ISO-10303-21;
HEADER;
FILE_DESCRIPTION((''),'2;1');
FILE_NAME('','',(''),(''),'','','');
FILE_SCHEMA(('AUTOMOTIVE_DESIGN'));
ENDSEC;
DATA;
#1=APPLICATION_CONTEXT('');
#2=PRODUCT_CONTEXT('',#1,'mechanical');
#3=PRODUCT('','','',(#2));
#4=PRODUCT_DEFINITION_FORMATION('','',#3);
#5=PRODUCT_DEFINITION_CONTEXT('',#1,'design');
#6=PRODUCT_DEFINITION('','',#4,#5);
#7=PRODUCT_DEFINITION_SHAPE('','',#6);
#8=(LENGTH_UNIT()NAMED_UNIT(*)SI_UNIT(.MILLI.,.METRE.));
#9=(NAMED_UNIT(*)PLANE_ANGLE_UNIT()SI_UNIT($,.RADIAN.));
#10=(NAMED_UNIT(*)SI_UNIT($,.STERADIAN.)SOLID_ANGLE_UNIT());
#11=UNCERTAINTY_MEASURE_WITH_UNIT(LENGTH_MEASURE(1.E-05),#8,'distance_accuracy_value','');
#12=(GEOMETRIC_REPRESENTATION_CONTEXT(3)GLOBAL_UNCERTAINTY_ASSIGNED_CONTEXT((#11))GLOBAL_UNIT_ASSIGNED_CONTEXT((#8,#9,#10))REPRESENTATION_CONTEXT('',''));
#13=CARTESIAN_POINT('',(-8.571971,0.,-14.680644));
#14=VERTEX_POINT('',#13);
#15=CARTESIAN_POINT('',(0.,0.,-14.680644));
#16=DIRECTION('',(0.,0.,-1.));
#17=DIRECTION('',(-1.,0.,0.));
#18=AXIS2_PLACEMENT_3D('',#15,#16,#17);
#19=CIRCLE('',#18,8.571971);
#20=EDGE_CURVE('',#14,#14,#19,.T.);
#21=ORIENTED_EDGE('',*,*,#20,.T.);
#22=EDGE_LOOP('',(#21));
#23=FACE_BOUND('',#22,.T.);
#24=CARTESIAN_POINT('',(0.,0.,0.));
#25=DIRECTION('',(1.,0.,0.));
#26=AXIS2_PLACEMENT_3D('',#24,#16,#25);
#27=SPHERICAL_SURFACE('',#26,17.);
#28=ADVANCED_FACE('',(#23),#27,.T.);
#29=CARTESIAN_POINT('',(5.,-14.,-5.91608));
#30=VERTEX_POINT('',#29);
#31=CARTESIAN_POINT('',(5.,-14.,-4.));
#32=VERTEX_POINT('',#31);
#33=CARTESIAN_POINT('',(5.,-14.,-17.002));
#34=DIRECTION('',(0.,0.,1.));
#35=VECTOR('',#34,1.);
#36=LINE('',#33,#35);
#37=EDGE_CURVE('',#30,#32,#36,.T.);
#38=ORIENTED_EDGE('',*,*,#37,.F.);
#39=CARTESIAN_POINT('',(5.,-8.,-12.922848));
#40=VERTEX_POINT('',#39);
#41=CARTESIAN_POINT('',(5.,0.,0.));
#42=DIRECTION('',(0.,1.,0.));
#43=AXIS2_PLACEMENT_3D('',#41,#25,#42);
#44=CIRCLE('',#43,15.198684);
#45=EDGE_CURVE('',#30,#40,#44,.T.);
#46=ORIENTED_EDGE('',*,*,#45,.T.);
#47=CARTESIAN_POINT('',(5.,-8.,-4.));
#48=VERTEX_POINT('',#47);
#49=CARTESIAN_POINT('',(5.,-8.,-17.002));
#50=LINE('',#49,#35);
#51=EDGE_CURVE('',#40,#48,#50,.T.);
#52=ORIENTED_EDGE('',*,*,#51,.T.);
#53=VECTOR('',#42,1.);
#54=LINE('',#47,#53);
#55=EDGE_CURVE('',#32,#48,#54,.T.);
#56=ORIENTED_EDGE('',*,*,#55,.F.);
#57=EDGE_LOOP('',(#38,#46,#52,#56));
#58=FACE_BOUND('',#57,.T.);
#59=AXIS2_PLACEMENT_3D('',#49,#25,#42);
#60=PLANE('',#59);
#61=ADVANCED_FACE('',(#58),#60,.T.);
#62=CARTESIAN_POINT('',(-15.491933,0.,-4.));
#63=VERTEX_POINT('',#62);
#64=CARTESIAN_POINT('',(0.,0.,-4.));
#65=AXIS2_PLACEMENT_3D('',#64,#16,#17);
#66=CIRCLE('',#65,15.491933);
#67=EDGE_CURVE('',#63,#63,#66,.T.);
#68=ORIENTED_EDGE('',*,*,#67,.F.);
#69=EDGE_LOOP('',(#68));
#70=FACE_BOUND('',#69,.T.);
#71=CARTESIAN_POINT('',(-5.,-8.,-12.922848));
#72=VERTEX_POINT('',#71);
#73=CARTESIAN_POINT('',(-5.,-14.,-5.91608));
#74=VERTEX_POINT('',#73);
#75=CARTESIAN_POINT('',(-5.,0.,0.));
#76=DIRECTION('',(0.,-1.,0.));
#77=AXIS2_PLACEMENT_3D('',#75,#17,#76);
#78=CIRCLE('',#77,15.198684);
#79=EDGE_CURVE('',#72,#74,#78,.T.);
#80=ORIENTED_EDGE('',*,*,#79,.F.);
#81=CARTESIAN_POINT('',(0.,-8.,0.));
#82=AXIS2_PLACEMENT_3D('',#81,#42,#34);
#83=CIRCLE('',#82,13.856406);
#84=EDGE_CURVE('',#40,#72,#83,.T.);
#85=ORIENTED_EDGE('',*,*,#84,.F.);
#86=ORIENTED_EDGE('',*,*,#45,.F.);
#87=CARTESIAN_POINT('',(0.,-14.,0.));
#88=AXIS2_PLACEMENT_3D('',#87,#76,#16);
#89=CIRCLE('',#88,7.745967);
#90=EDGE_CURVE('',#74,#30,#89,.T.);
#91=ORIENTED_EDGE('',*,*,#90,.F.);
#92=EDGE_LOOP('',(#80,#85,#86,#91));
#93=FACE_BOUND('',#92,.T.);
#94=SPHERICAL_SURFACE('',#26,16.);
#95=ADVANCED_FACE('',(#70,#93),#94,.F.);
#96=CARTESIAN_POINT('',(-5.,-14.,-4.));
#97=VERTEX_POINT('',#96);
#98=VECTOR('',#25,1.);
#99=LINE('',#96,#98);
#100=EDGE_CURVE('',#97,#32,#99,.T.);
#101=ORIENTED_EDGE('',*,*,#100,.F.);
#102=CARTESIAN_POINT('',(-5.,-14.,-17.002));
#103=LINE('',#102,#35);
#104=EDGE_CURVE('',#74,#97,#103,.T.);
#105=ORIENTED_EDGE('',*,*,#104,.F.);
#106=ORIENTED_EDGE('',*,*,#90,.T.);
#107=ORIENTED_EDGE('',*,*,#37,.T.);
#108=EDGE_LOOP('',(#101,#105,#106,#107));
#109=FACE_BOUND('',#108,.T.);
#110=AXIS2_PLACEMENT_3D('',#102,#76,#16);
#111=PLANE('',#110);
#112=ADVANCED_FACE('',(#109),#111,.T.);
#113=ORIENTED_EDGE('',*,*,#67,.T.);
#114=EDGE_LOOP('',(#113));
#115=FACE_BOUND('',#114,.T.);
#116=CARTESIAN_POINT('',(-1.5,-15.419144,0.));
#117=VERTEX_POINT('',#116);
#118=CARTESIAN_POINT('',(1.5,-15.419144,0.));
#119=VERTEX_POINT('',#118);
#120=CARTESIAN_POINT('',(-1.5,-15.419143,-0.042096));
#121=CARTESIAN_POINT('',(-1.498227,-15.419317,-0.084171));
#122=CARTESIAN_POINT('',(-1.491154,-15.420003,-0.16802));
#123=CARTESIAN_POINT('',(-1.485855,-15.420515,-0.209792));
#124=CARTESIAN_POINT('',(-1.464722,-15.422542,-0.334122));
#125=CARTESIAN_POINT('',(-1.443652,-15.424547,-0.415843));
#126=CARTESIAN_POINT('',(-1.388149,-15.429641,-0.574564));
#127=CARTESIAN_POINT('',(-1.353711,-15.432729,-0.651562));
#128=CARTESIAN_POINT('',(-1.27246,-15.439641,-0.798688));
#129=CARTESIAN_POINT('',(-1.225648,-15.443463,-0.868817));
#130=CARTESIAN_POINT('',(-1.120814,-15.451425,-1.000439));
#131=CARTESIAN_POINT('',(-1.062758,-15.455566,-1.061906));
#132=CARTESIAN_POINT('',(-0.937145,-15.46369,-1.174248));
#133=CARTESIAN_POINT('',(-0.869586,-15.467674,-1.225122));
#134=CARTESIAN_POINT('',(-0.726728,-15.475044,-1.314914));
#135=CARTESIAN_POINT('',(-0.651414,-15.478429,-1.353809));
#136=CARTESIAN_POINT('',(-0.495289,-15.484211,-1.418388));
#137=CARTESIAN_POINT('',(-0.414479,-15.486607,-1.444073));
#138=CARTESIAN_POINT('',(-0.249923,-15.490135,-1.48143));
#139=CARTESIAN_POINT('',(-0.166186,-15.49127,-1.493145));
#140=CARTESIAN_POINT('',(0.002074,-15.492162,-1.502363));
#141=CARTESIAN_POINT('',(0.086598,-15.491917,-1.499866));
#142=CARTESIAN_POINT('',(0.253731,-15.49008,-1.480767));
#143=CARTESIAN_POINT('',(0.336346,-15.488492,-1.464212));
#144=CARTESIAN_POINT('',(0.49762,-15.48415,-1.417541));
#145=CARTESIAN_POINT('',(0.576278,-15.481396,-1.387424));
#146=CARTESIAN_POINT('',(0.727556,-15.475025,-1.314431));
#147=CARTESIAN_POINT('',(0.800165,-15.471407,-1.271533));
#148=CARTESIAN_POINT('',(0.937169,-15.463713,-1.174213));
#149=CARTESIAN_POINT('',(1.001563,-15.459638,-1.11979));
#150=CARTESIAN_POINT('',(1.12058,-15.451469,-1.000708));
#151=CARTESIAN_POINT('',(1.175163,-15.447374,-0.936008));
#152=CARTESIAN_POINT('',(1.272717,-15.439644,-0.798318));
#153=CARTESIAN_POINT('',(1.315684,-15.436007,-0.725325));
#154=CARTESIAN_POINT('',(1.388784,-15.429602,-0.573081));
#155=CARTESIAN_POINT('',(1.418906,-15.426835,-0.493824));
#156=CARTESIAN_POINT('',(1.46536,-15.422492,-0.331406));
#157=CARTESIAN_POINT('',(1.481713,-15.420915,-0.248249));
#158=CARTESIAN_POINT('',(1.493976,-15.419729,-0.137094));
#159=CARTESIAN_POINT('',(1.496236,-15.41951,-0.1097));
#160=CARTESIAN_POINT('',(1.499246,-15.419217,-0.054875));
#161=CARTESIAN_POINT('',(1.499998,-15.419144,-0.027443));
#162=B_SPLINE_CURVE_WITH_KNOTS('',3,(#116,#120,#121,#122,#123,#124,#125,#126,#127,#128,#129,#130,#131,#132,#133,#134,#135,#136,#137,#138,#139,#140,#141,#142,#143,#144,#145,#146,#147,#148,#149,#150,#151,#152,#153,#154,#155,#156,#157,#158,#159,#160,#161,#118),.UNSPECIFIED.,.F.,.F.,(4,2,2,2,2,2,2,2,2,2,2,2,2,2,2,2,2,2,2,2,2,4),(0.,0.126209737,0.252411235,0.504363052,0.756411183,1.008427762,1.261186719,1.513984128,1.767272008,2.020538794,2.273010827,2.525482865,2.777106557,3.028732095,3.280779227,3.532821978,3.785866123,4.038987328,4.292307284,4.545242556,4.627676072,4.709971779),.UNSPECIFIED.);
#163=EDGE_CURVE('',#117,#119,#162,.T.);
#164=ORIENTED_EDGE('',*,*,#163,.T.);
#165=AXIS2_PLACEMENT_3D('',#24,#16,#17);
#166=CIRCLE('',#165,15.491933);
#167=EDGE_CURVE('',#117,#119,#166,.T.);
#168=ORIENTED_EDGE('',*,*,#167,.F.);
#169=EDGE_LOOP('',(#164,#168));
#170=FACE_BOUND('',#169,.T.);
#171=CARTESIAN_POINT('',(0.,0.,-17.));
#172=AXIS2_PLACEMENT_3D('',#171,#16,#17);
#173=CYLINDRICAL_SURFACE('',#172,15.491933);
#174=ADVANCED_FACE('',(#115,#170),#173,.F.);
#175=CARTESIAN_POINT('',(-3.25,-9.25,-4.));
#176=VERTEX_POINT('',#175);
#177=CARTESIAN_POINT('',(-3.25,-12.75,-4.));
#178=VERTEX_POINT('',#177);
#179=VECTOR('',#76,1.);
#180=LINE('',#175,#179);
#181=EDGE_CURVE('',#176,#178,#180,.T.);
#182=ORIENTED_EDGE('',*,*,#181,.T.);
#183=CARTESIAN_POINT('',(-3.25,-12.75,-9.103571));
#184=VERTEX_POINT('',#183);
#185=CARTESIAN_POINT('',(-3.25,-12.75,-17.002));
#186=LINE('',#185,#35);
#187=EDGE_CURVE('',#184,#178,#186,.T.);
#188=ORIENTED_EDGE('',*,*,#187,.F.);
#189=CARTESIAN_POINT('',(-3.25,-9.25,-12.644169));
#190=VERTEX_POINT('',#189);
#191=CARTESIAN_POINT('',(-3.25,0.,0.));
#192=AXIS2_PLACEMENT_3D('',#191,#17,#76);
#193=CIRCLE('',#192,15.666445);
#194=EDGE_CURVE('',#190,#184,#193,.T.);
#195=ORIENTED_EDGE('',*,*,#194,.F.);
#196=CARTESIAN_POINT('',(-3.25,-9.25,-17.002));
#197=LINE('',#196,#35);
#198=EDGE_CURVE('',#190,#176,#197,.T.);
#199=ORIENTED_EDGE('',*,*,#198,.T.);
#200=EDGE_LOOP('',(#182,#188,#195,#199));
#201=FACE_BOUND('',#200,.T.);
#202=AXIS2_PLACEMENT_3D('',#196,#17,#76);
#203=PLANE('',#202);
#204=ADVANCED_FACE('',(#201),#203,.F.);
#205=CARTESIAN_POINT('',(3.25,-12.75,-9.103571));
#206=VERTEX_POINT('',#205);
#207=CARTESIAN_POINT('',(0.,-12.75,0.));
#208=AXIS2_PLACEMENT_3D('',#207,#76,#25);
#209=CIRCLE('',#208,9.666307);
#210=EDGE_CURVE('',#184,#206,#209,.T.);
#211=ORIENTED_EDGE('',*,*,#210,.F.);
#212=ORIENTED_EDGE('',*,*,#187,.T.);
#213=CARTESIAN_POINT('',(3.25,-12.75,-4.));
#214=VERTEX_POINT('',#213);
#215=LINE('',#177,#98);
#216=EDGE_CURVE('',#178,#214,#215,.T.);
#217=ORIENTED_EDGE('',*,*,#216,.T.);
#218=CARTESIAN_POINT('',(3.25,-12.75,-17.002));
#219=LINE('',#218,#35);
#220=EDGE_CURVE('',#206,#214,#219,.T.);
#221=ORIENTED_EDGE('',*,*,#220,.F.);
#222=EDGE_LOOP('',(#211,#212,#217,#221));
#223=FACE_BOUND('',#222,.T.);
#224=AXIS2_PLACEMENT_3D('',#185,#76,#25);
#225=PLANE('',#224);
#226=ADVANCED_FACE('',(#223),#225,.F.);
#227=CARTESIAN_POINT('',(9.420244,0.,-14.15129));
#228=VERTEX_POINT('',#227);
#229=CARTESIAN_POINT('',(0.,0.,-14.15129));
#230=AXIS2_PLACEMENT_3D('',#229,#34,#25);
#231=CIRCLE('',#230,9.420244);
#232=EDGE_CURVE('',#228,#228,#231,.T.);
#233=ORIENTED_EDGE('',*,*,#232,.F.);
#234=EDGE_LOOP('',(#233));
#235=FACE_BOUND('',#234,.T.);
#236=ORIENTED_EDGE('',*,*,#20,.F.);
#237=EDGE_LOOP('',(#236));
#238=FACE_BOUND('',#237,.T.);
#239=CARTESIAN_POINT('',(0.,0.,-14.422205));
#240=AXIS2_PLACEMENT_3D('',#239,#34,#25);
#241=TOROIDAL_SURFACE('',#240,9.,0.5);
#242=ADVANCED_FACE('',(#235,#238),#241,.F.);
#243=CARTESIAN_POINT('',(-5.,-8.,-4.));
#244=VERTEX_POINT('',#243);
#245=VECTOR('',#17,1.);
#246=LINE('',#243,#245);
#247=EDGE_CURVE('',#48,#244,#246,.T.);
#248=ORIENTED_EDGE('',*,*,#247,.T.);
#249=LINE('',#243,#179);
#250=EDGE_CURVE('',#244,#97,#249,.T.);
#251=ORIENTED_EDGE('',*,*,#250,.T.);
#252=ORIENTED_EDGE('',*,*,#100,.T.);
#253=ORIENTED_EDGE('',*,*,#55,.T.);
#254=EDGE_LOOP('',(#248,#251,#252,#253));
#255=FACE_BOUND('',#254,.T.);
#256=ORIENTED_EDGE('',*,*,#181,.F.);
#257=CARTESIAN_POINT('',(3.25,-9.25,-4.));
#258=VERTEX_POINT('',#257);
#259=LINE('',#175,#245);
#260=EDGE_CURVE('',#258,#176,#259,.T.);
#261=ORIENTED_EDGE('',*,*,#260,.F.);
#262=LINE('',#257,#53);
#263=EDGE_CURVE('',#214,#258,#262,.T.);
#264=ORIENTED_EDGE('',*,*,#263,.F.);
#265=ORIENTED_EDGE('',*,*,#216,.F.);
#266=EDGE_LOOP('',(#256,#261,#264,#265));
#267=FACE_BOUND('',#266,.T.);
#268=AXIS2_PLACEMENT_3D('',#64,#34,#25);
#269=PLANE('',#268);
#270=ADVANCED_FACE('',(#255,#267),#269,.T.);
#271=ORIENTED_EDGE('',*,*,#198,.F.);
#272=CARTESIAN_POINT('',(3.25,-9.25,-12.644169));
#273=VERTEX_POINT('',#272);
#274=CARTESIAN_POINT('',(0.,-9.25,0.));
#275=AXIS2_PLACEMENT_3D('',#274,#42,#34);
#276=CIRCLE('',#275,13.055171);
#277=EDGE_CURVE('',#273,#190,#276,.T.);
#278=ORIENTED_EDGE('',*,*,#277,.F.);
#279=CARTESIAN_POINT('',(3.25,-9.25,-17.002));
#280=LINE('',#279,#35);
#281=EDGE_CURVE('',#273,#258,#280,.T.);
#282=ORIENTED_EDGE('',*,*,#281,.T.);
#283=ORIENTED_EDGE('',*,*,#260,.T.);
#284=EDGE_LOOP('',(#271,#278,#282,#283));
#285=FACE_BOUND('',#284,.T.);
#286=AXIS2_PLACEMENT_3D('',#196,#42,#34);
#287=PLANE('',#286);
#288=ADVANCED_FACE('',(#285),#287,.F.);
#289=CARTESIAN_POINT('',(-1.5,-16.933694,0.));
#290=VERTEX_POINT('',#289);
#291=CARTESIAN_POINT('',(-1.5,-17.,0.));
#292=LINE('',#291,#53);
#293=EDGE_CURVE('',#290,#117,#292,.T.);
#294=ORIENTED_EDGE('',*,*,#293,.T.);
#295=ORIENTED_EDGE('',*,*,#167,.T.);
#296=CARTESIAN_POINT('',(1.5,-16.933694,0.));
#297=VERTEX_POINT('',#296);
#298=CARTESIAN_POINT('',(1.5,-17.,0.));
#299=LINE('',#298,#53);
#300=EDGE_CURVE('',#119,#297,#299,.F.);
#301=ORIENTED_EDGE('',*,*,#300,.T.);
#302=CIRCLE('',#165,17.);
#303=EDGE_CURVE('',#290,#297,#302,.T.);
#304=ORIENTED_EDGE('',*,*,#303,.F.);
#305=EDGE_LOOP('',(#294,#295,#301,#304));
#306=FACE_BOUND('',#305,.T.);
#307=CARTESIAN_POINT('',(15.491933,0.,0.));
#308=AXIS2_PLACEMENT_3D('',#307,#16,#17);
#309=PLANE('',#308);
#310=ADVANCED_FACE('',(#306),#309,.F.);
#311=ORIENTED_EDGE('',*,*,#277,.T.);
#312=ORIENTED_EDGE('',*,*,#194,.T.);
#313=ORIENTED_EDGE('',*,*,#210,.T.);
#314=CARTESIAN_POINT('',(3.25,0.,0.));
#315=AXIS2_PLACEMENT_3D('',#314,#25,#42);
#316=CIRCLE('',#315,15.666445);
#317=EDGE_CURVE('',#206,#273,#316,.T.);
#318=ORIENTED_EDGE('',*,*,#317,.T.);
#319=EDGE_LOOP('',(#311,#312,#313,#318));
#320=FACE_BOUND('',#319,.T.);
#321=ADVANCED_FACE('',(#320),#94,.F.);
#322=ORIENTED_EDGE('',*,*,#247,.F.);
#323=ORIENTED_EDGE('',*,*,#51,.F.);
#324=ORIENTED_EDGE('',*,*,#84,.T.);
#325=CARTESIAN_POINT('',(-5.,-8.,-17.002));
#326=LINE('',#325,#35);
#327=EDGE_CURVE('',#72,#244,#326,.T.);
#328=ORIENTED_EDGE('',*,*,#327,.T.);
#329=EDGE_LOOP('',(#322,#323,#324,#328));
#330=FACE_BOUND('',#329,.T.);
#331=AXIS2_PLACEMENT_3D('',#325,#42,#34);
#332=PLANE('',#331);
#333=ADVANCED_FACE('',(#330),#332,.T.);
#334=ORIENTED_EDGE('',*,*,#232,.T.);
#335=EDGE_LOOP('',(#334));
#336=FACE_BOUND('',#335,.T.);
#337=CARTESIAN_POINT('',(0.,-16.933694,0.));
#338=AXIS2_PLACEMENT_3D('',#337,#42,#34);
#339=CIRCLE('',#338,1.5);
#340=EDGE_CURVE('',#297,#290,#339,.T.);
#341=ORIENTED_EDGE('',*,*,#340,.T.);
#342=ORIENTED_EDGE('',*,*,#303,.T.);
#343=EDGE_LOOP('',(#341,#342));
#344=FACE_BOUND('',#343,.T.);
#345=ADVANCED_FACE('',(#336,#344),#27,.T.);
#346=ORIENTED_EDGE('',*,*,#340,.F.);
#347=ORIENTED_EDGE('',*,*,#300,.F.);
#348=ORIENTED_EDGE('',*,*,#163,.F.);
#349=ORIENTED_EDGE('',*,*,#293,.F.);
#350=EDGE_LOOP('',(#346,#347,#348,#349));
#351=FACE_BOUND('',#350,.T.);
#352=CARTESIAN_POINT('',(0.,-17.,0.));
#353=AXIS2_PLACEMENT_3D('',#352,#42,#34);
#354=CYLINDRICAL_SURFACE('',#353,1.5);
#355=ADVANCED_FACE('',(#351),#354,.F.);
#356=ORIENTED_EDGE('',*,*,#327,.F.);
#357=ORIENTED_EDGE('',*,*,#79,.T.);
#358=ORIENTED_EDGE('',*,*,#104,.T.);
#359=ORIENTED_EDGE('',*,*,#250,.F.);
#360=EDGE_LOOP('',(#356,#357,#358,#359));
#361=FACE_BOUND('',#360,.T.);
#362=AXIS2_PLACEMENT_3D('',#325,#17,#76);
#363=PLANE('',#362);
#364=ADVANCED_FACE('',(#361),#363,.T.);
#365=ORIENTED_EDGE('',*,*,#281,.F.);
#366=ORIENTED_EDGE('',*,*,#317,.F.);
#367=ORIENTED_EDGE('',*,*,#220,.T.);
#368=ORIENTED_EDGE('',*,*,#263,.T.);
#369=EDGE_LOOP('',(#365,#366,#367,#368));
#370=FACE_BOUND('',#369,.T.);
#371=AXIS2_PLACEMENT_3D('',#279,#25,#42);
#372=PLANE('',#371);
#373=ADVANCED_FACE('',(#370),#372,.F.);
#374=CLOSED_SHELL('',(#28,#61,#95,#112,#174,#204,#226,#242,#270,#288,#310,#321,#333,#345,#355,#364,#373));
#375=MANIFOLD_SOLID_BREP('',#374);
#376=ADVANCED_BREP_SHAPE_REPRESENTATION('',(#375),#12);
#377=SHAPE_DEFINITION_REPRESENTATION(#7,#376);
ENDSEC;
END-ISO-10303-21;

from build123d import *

# Parameters (mm, degrees)
CUT_EXTRUDE_START    = -17
CUT_EXTRUDE_1_DEPTH  = 1.580856159
EXTRUDE_1_REACH      = 29.331
EXTRUDE_1_END_RADIUS = 16
SKETCH_3_W           = 10
SKETCH_3_H           = 6
SKETCH_3_W_2         = 6.5
SKETCH_3_H_2         = 3.5
SKETCH_4_R           = 0.5


# Read off the part's stored shape, not the designer's step: 切除-拉伸1
with BuildPart() as part:
    # 草图1 → 旋转1 (revolve)
    with BuildSketch(Plane(origin=(0, 0, 0), x_dir=(1, 0, 0), z_dir=(0, 1, 0))):
        with BuildLine():
            Line((15.491933385, 4), (15.491933385, 0))
            Line((15.491933385, 0), (17, 0))
            ThreePointArc((17, 0), (12.02081528, 12.02081528), (0, 17))
            Line((0, 17), (0, 16))
            ThreePointArc((0, 16), (9.797958971, 12.649110641), (15.491933385, 4))
        make_face()
    revolve(axis=Axis((0, 0, -17), (0, 0, 1)))

    # 切除-拉伸1 outline → 切除-拉伸1 (cut)
    with BuildSketch(Plane(origin=(0, 0, 0), x_dir=(1, 0, 0), z_dir=(0, 1, 0)).offset(CUT_EXTRUDE_START)):
        with BuildLine():
            Line((-1.5, 0), (1.5, 0))
            ThreePointArc((1.5, 0), (0, 1.5), (-1.5, 0))
        make_face()
    extrude(amount=CUT_EXTRUDE_1_DEPTH, mode=Mode.SUBTRACT)

    # 凸台-拉伸1: up to this sphere (the profile starts inside it)
    extrude_1_end = Location((0, 0, 0)) * Sphere(EXTRUDE_1_END_RADIUS, mode=Mode.PRIVATE)
    # 草图3 → 凸台-拉伸1 (add, up to the surface)
    with BuildSketch(Plane.XY.offset(-4), mode=Mode.PRIVATE) as extrude_1_sk1:
        with Locations((0, -11)):
            Rectangle(SKETCH_3_W, SKETCH_3_H)
        with Locations((0, -11)):
            Rectangle(SKETCH_3_W_2, SKETCH_3_H_2, mode=Mode.SUBTRACT)
    extrude_1_tool1 = extrude(extrude_1_sk1.sketch, amount=-EXTRUDE_1_REACH, mode=Mode.PRIVATE) & extrude_1_end
    add(extrude_1_tool1.solids().sort_by_distance((0, -8.116619, -4))[0])

    # 草图4 → 切除-旋转1 (revolve, cut)
    with BuildSketch(Plane(origin=(0, 0, 0), x_dir=(1, 0, 0), z_dir=(0, 1, 0))):
        with Locations((9, 14.422205102)):
            Circle(SKETCH_4_R)
    revolve(axis=Axis((0, 0, 0), (0, 0, -1)), mode=Mode.SUBTRACT)


solid = part.part
